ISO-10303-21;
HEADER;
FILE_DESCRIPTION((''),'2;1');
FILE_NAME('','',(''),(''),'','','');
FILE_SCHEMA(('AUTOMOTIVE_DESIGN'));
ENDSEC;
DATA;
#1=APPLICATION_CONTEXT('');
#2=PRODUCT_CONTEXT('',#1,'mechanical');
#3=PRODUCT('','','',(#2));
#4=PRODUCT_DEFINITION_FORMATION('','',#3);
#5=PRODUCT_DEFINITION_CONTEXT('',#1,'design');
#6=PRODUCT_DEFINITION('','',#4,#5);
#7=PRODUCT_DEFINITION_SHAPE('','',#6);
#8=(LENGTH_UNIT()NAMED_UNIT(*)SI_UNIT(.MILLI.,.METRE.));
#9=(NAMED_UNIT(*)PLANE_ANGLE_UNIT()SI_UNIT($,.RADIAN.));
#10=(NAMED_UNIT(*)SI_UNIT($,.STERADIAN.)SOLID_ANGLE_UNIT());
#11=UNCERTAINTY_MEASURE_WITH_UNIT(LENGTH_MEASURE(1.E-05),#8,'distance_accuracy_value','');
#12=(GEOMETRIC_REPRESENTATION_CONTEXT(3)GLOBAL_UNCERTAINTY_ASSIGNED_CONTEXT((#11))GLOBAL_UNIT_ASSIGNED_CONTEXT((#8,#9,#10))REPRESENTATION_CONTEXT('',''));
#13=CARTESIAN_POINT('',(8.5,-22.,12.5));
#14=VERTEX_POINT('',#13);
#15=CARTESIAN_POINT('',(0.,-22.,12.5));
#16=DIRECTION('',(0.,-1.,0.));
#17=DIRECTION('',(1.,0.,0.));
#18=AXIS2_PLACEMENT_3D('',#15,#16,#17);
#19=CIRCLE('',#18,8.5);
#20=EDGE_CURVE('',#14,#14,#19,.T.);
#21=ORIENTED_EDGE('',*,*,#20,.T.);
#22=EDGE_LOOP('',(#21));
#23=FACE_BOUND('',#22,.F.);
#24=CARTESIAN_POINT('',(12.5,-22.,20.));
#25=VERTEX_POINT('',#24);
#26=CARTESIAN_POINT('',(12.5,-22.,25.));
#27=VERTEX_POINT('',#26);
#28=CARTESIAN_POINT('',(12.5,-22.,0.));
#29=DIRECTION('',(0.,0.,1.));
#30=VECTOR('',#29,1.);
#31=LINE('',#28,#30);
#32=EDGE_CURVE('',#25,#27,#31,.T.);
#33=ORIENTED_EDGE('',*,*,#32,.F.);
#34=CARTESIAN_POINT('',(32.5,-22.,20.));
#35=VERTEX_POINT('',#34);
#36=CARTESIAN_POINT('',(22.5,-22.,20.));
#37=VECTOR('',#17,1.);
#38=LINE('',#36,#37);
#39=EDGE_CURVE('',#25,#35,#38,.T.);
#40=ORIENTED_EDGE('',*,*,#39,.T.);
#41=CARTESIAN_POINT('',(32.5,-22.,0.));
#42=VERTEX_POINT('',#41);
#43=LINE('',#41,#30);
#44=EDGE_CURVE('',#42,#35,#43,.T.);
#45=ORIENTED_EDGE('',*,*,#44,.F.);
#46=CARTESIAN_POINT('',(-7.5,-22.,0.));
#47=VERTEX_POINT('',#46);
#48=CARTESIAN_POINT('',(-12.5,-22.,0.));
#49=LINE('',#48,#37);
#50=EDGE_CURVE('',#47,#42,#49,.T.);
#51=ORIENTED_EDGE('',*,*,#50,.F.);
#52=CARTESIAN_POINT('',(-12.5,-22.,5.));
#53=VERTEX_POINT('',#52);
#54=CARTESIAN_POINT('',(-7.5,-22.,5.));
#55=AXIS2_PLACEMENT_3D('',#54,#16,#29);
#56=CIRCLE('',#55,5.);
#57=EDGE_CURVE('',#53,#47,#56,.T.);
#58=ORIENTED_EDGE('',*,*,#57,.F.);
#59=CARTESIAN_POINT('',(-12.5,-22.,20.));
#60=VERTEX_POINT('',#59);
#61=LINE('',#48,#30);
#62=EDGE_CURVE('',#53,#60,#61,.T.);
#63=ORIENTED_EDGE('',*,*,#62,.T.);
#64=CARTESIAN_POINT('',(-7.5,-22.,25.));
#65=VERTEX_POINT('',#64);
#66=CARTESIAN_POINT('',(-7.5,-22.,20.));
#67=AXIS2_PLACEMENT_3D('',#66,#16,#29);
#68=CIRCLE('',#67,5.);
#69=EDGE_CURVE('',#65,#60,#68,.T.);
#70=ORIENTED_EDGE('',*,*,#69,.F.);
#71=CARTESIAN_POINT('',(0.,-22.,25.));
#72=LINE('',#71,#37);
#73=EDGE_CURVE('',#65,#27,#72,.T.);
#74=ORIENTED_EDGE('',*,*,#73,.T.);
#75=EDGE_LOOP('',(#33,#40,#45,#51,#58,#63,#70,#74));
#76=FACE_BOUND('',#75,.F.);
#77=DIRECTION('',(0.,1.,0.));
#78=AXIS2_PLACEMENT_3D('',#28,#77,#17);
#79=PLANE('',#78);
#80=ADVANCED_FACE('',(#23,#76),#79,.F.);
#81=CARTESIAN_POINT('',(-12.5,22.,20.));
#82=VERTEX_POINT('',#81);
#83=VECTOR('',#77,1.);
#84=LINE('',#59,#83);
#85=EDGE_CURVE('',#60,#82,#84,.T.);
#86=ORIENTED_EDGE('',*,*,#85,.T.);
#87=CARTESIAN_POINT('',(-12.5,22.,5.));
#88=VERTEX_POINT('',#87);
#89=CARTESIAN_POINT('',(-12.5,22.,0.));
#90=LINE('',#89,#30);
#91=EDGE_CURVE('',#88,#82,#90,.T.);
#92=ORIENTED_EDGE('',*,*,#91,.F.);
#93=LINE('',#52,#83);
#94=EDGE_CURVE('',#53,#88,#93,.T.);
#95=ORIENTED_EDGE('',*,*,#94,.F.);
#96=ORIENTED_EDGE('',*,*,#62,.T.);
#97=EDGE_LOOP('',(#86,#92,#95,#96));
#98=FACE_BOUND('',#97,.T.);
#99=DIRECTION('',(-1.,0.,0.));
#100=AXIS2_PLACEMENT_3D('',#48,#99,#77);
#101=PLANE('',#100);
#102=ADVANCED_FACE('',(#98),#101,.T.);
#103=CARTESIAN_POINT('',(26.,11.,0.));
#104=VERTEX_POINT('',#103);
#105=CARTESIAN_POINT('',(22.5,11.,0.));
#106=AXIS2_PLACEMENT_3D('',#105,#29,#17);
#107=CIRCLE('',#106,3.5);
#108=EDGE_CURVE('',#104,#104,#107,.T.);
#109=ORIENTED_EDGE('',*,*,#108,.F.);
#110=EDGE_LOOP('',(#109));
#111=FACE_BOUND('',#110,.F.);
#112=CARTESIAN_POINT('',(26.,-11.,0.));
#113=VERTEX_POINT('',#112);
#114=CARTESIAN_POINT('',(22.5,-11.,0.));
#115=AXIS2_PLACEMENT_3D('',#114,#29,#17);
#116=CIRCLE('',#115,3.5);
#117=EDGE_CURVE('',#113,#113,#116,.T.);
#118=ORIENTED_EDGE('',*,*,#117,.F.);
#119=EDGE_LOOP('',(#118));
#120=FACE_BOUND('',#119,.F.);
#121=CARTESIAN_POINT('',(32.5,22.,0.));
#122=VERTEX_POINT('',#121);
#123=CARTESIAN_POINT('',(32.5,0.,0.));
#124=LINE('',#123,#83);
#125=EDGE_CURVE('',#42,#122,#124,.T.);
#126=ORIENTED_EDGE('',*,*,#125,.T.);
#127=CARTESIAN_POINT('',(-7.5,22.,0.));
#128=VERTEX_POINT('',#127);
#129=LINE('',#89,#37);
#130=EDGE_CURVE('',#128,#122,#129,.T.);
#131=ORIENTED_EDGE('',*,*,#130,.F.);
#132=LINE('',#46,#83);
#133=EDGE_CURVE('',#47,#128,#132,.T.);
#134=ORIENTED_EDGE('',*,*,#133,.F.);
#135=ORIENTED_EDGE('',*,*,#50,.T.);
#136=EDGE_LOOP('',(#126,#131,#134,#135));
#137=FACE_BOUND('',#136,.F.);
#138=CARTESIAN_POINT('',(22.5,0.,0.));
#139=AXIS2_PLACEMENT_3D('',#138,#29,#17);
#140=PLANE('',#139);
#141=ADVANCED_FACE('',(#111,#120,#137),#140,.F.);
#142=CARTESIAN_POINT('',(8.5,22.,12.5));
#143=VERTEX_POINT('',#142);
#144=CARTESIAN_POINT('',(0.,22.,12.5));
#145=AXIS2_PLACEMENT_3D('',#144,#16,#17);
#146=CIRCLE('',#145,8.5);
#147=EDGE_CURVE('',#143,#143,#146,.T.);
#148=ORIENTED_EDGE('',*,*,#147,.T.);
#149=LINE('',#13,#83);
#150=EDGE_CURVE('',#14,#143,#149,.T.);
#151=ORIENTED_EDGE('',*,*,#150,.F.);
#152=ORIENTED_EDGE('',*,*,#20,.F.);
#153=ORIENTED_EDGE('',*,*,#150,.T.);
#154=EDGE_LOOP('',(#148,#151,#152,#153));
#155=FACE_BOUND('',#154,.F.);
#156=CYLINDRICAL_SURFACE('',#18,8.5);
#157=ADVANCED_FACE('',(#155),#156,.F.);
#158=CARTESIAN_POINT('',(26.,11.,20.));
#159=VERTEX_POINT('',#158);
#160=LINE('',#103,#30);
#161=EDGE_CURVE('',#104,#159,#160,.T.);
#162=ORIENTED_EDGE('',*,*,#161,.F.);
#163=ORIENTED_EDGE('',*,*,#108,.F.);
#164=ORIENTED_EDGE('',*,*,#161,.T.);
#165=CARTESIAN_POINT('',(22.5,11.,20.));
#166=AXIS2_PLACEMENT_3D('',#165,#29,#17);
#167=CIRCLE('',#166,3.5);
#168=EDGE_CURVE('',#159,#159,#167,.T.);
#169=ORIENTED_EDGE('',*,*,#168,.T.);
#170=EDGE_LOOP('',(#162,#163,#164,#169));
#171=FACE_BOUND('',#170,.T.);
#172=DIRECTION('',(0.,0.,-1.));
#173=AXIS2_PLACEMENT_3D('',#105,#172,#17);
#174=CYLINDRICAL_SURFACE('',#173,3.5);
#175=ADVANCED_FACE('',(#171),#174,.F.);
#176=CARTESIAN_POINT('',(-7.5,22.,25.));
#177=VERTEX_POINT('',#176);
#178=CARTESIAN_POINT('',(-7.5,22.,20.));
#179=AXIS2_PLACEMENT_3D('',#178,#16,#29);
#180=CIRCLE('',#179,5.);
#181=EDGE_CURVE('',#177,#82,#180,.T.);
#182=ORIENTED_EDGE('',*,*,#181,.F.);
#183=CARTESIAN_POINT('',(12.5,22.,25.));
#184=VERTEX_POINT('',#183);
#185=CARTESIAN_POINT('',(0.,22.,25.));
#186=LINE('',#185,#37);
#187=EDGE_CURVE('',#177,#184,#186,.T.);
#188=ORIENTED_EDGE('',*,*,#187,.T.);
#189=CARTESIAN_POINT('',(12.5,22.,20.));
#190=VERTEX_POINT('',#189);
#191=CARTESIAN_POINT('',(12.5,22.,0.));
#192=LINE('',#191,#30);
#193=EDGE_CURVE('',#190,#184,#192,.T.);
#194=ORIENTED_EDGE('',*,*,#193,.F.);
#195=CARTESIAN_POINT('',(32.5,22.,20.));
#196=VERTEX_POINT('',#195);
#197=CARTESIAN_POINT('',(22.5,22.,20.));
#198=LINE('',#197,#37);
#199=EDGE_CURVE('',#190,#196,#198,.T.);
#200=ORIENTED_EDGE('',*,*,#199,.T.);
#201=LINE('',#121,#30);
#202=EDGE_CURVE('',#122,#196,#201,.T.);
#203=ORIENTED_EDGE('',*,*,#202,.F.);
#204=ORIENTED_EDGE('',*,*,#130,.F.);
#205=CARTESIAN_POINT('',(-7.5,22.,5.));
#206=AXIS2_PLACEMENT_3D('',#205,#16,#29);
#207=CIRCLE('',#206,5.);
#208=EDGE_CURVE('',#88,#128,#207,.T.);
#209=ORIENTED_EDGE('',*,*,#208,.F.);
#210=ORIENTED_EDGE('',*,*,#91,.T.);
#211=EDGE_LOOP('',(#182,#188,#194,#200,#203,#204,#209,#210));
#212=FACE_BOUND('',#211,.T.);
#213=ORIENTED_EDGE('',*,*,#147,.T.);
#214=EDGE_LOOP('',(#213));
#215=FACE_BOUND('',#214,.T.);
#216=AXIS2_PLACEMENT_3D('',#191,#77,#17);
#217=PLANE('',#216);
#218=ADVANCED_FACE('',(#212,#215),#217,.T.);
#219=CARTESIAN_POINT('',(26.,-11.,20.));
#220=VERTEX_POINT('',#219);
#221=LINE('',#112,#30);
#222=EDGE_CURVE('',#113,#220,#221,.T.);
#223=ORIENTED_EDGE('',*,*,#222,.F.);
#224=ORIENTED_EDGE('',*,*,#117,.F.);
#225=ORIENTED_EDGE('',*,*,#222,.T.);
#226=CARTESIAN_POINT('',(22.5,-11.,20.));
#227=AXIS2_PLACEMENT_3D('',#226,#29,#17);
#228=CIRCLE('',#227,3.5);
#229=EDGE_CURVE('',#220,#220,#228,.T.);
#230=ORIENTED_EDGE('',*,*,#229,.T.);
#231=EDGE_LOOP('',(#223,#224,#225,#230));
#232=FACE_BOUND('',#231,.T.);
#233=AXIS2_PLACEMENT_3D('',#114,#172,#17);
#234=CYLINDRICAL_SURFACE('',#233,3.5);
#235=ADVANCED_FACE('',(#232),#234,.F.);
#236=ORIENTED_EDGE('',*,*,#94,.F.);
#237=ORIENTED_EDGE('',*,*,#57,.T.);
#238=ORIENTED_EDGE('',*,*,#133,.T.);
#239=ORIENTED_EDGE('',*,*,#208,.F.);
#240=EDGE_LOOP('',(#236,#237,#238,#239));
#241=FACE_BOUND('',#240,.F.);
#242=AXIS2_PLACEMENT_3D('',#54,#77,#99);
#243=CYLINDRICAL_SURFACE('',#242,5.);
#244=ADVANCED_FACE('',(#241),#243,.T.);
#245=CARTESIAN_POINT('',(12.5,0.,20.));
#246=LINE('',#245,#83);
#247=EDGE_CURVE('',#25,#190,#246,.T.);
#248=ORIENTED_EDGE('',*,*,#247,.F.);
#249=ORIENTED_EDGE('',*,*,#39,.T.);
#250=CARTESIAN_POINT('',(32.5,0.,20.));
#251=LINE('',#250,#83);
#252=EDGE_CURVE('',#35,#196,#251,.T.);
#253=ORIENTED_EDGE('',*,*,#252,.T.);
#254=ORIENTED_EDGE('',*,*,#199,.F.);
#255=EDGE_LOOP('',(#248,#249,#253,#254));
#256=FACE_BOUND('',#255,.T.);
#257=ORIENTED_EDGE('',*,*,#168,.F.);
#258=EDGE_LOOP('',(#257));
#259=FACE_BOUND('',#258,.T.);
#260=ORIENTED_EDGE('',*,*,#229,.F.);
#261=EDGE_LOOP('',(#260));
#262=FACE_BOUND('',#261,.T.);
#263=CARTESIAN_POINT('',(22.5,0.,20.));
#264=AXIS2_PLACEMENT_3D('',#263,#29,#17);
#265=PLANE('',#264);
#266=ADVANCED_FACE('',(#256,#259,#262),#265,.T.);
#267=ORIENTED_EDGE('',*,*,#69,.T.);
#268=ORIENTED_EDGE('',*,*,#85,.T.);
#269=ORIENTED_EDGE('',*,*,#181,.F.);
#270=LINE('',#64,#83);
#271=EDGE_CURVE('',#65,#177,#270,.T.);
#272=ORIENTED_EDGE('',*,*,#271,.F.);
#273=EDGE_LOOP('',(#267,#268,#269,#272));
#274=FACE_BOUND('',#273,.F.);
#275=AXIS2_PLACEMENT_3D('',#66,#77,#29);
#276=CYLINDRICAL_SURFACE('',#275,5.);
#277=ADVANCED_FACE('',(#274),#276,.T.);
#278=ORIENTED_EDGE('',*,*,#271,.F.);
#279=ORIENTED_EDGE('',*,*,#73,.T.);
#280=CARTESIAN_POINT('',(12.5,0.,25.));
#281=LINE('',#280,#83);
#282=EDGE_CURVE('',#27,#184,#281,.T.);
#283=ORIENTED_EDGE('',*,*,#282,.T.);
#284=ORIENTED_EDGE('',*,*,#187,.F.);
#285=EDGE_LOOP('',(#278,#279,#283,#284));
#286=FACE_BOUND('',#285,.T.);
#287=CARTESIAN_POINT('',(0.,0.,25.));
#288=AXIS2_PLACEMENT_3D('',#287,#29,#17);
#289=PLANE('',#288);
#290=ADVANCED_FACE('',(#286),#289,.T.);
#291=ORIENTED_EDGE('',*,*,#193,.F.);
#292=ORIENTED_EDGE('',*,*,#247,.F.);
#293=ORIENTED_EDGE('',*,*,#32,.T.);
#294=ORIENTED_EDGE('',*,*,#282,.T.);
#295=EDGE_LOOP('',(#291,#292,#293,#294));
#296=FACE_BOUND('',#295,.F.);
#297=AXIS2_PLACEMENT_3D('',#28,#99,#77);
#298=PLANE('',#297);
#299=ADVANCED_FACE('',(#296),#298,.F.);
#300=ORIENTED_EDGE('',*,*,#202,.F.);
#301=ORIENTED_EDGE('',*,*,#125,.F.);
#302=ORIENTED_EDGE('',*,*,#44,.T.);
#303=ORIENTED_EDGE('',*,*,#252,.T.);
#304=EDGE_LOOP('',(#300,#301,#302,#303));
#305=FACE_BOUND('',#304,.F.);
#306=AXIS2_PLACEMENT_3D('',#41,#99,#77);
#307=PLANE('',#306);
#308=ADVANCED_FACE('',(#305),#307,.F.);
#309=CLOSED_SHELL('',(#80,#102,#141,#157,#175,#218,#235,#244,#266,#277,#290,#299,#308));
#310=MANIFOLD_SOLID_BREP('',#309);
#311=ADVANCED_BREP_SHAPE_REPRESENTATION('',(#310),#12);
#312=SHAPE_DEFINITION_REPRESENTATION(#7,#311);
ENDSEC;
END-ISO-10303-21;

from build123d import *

# Parameters (mm, degrees)
F0_W     = 25
F0_H     = 44
F1_DEPTH = 25
F2_R     = 8.5
F3_DEPTH = 44.001
F0_W_2   = 20
F0_R     = 3.5
F4_DEPTH = 20
F5_R     = 5


# Not quite as in the source:
# - a feature names something its author has since deleted; it is built from what else it names


with BuildPart() as f1:
    # F0 (on Top) → F1 (new body)
    with BuildSketch(Plane.XY):
        Rectangle(F0_W, F0_H)
    extrude(amount=F1_DEPTH)

    # F2 (on face) → F3 (cut, through all)
    with BuildSketch(Plane.XZ.offset(22)):
        with Locations((0, 12.5)):
            Circle(F2_R)
    extrude(amount=-F3_DEPTH, mode=Mode.SUBTRACT)

    # F0 (on Top) → F4 (join)
    with BuildSketch(Plane.XY):
        with Locations((22.5, 0)):
            Rectangle(F0_W_2, F0_H)
        with Locations((22.5, -11)):
            Circle(F0_R, mode=Mode.SUBTRACT)
        with Locations((22.5, 11)):
            Circle(F0_R, mode=Mode.SUBTRACT)
    extrude(amount=F4_DEPTH)

    # F5
    f5_edges = [f1.edges().sort_by_distance(p)[0] for p in [
        (-12.5, 0, 25),
        (-12.5, 0, 0),
    ]]
    fillet(f5_edges, radius=F5_R)


solid = f1.part
